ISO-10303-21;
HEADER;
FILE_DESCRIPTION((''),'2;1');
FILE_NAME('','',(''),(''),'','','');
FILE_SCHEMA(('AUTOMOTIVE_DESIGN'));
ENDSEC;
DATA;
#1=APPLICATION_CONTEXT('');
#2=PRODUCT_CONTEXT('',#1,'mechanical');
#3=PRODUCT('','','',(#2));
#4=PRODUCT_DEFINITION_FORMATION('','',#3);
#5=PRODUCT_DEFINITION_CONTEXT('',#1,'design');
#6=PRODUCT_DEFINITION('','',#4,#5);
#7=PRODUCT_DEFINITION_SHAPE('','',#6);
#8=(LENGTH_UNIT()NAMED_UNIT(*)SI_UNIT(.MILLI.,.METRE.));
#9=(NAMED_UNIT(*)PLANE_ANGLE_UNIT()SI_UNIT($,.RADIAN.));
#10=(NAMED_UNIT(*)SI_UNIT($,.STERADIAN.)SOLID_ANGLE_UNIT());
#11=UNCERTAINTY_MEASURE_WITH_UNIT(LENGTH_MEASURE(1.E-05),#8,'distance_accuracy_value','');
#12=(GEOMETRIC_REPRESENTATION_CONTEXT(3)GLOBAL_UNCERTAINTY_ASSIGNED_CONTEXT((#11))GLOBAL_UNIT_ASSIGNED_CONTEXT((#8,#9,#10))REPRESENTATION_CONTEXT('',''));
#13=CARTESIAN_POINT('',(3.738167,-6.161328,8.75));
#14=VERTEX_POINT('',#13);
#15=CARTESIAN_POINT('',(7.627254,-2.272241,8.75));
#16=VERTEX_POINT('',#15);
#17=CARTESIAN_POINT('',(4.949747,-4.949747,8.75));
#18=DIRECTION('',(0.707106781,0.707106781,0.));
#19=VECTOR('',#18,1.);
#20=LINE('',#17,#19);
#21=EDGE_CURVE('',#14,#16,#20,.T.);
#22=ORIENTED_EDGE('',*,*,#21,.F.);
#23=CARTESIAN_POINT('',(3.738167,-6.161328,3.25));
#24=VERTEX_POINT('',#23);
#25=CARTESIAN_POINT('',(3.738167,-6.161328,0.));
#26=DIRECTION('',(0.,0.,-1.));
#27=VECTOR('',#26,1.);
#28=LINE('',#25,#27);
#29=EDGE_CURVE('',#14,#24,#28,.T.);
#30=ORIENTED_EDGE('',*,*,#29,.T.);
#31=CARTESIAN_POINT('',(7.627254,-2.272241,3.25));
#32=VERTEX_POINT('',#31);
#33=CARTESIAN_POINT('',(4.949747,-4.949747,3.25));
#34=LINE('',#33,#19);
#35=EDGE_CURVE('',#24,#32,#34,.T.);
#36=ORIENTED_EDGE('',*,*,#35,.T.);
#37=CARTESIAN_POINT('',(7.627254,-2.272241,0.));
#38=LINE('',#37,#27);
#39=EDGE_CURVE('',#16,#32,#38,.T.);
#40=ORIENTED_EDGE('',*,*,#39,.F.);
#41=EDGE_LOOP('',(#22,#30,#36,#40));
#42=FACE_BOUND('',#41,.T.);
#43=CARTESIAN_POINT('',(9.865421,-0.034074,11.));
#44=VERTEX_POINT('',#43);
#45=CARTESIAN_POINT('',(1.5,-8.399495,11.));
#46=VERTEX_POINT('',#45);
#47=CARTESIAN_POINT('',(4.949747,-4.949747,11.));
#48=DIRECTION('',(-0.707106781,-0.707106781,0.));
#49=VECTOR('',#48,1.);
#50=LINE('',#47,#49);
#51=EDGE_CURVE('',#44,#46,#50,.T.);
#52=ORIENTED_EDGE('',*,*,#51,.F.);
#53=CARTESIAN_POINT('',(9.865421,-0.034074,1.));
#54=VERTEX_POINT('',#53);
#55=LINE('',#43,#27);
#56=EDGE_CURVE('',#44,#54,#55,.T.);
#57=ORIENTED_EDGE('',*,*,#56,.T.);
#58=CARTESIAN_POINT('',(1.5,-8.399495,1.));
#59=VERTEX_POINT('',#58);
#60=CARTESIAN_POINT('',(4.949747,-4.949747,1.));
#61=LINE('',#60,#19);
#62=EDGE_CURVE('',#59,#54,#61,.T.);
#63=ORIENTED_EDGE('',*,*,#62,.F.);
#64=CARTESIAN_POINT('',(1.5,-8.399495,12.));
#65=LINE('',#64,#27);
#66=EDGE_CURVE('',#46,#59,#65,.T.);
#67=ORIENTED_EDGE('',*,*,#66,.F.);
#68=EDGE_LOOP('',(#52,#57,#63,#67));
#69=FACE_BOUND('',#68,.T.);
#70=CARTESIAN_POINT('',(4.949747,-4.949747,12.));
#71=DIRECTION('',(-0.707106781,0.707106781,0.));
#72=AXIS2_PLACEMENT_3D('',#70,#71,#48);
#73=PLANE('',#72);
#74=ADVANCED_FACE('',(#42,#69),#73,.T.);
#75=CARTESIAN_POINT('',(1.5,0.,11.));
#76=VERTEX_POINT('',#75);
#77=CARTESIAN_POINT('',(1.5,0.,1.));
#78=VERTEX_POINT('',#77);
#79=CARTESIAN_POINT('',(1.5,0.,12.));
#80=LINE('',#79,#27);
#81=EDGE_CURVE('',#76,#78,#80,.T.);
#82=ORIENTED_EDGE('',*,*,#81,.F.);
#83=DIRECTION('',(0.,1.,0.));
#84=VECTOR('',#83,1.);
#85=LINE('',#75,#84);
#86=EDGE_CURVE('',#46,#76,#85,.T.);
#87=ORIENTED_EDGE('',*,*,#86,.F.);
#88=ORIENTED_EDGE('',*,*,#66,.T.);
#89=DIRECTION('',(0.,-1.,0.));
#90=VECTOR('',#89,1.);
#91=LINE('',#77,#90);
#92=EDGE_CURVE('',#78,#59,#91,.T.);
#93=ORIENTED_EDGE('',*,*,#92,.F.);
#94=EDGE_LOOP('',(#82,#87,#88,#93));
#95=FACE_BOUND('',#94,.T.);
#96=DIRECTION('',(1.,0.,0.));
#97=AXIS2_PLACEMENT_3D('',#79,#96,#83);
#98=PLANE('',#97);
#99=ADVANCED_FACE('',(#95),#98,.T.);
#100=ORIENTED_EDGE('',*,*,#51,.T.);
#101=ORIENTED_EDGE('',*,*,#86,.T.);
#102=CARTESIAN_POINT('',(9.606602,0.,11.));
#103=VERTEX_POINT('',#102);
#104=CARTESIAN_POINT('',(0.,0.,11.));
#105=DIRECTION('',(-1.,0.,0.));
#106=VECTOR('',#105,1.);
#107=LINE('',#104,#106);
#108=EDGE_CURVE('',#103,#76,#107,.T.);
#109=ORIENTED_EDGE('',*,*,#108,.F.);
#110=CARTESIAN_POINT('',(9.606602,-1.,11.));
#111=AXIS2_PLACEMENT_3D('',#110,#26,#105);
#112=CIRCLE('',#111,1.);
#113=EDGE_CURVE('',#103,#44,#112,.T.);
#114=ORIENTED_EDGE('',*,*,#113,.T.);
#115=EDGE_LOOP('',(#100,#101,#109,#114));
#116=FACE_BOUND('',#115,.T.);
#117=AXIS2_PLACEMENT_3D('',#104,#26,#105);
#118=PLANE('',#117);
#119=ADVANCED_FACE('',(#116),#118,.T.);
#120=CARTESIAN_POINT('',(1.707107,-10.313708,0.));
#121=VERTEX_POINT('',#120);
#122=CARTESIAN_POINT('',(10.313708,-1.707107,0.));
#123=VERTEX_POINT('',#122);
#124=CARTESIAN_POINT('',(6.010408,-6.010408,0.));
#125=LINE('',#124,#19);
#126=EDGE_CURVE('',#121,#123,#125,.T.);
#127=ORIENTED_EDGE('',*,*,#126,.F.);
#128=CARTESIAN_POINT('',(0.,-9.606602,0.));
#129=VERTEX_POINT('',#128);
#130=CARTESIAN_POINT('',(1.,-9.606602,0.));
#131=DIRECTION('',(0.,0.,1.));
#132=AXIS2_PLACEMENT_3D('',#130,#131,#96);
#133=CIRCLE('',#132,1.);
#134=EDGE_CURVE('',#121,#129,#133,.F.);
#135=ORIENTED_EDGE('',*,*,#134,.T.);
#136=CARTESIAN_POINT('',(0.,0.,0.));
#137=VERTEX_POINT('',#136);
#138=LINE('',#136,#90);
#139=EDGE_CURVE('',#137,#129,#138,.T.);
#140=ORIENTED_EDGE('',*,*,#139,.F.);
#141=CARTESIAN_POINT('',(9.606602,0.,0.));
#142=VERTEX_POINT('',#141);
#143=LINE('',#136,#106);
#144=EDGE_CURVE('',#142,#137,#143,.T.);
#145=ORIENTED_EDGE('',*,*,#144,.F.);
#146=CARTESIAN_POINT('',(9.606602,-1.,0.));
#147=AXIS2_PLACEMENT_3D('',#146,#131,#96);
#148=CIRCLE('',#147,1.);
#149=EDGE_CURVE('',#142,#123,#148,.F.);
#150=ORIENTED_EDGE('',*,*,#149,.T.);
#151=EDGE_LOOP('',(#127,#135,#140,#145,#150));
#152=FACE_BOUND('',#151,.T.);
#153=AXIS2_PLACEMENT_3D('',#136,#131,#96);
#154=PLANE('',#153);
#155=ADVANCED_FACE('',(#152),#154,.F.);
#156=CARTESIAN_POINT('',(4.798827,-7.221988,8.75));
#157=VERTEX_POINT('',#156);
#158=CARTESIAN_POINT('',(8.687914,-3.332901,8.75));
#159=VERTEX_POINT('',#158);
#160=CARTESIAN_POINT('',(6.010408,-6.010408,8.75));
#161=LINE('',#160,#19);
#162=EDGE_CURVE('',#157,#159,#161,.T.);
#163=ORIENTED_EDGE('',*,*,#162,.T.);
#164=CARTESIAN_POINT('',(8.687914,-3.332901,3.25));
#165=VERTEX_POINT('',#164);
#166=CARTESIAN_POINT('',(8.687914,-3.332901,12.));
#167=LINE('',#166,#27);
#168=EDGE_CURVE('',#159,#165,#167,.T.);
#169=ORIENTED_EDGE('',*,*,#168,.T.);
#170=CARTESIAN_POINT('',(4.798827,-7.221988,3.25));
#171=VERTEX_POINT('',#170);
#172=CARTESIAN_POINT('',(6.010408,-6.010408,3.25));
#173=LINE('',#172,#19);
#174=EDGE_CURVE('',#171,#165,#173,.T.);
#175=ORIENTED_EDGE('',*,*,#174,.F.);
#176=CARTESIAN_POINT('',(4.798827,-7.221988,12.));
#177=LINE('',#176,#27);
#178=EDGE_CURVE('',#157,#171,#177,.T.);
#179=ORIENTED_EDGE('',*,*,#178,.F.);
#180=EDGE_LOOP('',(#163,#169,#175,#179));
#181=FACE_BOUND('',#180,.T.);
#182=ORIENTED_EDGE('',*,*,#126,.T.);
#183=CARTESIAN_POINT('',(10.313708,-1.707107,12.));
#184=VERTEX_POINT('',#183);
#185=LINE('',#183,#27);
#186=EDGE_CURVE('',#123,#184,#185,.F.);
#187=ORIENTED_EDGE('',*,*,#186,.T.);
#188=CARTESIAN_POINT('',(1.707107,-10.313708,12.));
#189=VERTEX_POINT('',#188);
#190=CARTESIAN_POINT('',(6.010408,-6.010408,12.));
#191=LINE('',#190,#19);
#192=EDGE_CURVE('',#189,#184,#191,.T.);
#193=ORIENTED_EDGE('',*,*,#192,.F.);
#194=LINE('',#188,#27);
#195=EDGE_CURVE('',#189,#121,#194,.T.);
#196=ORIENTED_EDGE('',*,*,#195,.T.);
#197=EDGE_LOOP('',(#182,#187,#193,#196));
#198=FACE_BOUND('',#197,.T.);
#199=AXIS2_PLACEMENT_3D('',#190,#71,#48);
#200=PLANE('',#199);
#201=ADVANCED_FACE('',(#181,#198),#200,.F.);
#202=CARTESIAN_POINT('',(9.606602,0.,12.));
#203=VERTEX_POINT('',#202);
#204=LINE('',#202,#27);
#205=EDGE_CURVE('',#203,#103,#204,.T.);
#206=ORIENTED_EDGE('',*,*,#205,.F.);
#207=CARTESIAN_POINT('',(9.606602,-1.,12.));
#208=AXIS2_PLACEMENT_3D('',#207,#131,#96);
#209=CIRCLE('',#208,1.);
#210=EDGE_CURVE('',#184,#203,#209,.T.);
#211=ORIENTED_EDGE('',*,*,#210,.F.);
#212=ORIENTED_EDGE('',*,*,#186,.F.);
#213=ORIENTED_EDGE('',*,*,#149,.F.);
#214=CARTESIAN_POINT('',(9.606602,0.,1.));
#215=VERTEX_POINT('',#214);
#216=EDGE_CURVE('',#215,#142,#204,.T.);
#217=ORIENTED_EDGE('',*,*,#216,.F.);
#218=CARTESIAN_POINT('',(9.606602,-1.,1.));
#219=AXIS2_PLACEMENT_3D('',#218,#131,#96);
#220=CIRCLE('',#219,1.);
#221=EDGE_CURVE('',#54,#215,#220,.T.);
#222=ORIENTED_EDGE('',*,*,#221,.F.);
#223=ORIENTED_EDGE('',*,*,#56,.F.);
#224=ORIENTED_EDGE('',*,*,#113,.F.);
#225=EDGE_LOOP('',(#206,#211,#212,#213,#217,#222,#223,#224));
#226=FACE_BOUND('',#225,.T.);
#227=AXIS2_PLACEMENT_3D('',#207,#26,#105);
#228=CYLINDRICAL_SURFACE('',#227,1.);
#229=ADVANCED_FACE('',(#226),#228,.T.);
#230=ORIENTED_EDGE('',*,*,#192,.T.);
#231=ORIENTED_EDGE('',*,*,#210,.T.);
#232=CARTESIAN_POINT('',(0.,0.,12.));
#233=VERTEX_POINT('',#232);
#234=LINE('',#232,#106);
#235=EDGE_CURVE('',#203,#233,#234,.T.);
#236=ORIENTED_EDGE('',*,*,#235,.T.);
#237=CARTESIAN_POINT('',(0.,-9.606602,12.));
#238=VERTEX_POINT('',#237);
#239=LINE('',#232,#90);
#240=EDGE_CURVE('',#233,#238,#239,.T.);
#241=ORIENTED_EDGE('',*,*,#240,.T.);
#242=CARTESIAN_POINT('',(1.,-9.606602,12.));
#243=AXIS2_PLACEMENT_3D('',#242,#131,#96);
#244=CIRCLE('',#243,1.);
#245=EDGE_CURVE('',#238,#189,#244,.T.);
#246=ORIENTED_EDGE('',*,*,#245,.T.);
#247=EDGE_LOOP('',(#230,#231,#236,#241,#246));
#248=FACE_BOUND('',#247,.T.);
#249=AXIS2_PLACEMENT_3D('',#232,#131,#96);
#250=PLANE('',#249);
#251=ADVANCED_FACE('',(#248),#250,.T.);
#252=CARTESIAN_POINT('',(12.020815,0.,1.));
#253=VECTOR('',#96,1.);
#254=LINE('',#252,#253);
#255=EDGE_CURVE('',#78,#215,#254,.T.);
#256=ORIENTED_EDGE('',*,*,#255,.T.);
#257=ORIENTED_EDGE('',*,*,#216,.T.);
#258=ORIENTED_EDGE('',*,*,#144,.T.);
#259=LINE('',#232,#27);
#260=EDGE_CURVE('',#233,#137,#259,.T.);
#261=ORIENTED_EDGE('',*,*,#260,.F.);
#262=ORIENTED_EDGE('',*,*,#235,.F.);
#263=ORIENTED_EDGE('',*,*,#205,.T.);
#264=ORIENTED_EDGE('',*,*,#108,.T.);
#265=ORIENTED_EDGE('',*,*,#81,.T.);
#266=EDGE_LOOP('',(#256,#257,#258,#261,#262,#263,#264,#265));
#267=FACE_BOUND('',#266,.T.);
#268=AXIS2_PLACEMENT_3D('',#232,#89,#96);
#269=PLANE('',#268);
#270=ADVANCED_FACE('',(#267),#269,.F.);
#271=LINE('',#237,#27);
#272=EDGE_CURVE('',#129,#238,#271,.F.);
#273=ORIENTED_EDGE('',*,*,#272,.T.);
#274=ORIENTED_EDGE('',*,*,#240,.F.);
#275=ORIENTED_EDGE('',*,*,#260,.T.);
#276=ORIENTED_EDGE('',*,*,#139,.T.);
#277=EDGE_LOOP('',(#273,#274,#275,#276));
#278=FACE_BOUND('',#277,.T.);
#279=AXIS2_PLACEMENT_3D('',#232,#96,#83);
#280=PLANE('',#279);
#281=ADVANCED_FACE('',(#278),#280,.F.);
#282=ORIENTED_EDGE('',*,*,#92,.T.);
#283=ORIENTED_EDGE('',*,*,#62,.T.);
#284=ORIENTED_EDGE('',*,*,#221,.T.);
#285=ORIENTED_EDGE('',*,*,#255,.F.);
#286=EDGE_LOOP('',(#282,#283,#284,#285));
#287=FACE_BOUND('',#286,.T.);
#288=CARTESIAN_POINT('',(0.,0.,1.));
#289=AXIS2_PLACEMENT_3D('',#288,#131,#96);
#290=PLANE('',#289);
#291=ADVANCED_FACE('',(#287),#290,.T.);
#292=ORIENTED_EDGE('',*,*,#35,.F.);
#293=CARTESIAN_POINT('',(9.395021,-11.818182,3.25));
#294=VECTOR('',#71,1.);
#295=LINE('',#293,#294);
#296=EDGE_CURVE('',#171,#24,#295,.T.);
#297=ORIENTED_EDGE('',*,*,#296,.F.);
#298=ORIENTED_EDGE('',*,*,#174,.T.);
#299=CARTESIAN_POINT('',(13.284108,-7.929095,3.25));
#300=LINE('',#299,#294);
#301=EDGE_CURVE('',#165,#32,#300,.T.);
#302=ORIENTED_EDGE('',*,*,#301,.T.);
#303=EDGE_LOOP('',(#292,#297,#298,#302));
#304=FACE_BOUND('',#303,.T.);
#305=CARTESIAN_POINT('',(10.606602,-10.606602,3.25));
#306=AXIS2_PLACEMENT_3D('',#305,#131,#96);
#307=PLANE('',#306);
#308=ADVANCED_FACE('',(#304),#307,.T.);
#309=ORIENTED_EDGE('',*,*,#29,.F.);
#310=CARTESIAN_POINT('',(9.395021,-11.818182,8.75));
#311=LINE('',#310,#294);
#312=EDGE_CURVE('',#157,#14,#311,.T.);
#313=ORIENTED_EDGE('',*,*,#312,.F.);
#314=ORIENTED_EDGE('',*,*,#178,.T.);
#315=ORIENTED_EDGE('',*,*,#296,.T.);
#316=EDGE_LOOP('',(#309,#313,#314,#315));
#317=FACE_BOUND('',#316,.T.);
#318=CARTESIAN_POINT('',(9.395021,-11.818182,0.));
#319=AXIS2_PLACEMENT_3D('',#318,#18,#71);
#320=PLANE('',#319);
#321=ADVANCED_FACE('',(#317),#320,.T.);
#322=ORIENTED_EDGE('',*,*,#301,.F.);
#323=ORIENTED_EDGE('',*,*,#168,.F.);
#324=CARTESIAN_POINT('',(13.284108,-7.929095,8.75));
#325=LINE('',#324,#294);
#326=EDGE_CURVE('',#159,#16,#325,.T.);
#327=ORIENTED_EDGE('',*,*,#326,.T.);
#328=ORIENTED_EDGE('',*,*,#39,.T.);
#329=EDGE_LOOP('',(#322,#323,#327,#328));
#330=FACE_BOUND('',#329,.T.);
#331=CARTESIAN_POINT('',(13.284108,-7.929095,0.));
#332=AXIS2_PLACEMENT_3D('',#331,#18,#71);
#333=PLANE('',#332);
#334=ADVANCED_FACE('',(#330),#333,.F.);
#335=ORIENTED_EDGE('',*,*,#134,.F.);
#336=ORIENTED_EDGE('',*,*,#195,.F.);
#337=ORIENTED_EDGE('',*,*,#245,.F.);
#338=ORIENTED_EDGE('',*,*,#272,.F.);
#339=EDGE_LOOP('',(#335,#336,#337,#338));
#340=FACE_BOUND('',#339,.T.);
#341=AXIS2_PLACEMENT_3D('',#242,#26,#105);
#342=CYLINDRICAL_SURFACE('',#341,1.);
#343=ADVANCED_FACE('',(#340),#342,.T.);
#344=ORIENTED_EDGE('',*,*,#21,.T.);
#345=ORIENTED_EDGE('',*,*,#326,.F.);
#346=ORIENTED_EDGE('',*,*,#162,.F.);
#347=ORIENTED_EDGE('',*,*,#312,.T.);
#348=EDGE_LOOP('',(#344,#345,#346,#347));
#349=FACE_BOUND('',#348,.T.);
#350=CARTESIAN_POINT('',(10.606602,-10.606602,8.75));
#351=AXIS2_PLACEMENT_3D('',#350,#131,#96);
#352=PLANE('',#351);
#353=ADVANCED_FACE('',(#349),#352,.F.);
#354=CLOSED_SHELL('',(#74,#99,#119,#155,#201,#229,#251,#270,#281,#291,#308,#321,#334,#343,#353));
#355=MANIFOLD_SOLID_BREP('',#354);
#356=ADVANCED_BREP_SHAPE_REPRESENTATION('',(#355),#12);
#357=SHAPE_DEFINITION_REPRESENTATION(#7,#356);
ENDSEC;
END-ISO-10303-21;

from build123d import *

# Parameters (mm, degrees)
BOSS_EXTRUDE1_DEPTH = 12
BOSS_EXTRUDE2_DEPTH = 1
BOSS_EXTRUDE3_DEPTH = 1
FILLET1_R           = 1
SKETCH5_W           = 5.5
SKETCH5_H           = 5.5
CUT_EXTRUDE1_DEPTH  = 15.422205102


with BuildPart() as part:
    # Sketch1 → Boss-Extrude1 (new body)
    with BuildSketch(Plane.XY):
        Polygon((1.5, 0), (0, 0), (0, -12.02081528), (12.02081528, 0), (9.899494937, 0), (8.399494937, -1.5), (1.5, -8.399494937), (1.5, -1.5), align=None)
    extrude(amount=BOSS_EXTRUDE1_DEPTH)

    # Sketch2 → Boss-Extrude2 (add)
    with BuildSketch(Plane.XY.offset(12)):
        Polygon((0, 0), (12.02081528, 0), (0, -12.02081528), align=None)
    extrude(amount=-BOSS_EXTRUDE2_DEPTH)

    # Sketch3 → Boss-Extrude3 (add)
    with BuildSketch(Plane(origin=(0, 0, 0), x_dir=(-1, 0, 0), z_dir=(0, 0, -1))):
        Polygon((-12.02081528, 0), (0, 0), (0, -12.02081528), align=None)
    extrude(amount=-BOSS_EXTRUDE3_DEPTH)

    # Fillet1
    # the kernel refuses this fillet: 1 mm, written as the material it takes off along each edge
    with BuildSketch(Plane(origin=(0, -12.02081528, -6.035533906), x_dir=(0, 1, 0), z_dir=(0, 0, 1)), Plane(origin=(12.02081528, 0, 18.035533906), x_dir=(-1, 0, 0), z_dir=(0, 0, -1))) as fillet1_piece_1:
        with BuildLine():
            CenterArc((FILLET1_R * 2.41421356237, -FILLET1_R), FILLET1_R, 90, 135)
            Line((FILLET1_R * 1.70710678119, -FILLET1_R * 1.70710678119), (0, 0))
            Line((0, 0), (FILLET1_R * 2.41421356237, 0))
        make_face()
    extrude(amount=24.071067812, mode=Mode.SUBTRACT)

    # Sketch5 → Cut-Extrude1 (cut, through all)
    with BuildSketch(Plane(origin=(4.949747468, -4.949747468, 0), x_dir=(0, 0, 1), z_dir=(-0.7071067811865476, 0.7071067811865475, 0))):
        with Locations((6, 1.036566092)):
            Rectangle(SKETCH5_W, SKETCH5_H)
    extrude(amount=-CUT_EXTRUDE1_DEPTH, mode=Mode.SUBTRACT)


solid = part.part
